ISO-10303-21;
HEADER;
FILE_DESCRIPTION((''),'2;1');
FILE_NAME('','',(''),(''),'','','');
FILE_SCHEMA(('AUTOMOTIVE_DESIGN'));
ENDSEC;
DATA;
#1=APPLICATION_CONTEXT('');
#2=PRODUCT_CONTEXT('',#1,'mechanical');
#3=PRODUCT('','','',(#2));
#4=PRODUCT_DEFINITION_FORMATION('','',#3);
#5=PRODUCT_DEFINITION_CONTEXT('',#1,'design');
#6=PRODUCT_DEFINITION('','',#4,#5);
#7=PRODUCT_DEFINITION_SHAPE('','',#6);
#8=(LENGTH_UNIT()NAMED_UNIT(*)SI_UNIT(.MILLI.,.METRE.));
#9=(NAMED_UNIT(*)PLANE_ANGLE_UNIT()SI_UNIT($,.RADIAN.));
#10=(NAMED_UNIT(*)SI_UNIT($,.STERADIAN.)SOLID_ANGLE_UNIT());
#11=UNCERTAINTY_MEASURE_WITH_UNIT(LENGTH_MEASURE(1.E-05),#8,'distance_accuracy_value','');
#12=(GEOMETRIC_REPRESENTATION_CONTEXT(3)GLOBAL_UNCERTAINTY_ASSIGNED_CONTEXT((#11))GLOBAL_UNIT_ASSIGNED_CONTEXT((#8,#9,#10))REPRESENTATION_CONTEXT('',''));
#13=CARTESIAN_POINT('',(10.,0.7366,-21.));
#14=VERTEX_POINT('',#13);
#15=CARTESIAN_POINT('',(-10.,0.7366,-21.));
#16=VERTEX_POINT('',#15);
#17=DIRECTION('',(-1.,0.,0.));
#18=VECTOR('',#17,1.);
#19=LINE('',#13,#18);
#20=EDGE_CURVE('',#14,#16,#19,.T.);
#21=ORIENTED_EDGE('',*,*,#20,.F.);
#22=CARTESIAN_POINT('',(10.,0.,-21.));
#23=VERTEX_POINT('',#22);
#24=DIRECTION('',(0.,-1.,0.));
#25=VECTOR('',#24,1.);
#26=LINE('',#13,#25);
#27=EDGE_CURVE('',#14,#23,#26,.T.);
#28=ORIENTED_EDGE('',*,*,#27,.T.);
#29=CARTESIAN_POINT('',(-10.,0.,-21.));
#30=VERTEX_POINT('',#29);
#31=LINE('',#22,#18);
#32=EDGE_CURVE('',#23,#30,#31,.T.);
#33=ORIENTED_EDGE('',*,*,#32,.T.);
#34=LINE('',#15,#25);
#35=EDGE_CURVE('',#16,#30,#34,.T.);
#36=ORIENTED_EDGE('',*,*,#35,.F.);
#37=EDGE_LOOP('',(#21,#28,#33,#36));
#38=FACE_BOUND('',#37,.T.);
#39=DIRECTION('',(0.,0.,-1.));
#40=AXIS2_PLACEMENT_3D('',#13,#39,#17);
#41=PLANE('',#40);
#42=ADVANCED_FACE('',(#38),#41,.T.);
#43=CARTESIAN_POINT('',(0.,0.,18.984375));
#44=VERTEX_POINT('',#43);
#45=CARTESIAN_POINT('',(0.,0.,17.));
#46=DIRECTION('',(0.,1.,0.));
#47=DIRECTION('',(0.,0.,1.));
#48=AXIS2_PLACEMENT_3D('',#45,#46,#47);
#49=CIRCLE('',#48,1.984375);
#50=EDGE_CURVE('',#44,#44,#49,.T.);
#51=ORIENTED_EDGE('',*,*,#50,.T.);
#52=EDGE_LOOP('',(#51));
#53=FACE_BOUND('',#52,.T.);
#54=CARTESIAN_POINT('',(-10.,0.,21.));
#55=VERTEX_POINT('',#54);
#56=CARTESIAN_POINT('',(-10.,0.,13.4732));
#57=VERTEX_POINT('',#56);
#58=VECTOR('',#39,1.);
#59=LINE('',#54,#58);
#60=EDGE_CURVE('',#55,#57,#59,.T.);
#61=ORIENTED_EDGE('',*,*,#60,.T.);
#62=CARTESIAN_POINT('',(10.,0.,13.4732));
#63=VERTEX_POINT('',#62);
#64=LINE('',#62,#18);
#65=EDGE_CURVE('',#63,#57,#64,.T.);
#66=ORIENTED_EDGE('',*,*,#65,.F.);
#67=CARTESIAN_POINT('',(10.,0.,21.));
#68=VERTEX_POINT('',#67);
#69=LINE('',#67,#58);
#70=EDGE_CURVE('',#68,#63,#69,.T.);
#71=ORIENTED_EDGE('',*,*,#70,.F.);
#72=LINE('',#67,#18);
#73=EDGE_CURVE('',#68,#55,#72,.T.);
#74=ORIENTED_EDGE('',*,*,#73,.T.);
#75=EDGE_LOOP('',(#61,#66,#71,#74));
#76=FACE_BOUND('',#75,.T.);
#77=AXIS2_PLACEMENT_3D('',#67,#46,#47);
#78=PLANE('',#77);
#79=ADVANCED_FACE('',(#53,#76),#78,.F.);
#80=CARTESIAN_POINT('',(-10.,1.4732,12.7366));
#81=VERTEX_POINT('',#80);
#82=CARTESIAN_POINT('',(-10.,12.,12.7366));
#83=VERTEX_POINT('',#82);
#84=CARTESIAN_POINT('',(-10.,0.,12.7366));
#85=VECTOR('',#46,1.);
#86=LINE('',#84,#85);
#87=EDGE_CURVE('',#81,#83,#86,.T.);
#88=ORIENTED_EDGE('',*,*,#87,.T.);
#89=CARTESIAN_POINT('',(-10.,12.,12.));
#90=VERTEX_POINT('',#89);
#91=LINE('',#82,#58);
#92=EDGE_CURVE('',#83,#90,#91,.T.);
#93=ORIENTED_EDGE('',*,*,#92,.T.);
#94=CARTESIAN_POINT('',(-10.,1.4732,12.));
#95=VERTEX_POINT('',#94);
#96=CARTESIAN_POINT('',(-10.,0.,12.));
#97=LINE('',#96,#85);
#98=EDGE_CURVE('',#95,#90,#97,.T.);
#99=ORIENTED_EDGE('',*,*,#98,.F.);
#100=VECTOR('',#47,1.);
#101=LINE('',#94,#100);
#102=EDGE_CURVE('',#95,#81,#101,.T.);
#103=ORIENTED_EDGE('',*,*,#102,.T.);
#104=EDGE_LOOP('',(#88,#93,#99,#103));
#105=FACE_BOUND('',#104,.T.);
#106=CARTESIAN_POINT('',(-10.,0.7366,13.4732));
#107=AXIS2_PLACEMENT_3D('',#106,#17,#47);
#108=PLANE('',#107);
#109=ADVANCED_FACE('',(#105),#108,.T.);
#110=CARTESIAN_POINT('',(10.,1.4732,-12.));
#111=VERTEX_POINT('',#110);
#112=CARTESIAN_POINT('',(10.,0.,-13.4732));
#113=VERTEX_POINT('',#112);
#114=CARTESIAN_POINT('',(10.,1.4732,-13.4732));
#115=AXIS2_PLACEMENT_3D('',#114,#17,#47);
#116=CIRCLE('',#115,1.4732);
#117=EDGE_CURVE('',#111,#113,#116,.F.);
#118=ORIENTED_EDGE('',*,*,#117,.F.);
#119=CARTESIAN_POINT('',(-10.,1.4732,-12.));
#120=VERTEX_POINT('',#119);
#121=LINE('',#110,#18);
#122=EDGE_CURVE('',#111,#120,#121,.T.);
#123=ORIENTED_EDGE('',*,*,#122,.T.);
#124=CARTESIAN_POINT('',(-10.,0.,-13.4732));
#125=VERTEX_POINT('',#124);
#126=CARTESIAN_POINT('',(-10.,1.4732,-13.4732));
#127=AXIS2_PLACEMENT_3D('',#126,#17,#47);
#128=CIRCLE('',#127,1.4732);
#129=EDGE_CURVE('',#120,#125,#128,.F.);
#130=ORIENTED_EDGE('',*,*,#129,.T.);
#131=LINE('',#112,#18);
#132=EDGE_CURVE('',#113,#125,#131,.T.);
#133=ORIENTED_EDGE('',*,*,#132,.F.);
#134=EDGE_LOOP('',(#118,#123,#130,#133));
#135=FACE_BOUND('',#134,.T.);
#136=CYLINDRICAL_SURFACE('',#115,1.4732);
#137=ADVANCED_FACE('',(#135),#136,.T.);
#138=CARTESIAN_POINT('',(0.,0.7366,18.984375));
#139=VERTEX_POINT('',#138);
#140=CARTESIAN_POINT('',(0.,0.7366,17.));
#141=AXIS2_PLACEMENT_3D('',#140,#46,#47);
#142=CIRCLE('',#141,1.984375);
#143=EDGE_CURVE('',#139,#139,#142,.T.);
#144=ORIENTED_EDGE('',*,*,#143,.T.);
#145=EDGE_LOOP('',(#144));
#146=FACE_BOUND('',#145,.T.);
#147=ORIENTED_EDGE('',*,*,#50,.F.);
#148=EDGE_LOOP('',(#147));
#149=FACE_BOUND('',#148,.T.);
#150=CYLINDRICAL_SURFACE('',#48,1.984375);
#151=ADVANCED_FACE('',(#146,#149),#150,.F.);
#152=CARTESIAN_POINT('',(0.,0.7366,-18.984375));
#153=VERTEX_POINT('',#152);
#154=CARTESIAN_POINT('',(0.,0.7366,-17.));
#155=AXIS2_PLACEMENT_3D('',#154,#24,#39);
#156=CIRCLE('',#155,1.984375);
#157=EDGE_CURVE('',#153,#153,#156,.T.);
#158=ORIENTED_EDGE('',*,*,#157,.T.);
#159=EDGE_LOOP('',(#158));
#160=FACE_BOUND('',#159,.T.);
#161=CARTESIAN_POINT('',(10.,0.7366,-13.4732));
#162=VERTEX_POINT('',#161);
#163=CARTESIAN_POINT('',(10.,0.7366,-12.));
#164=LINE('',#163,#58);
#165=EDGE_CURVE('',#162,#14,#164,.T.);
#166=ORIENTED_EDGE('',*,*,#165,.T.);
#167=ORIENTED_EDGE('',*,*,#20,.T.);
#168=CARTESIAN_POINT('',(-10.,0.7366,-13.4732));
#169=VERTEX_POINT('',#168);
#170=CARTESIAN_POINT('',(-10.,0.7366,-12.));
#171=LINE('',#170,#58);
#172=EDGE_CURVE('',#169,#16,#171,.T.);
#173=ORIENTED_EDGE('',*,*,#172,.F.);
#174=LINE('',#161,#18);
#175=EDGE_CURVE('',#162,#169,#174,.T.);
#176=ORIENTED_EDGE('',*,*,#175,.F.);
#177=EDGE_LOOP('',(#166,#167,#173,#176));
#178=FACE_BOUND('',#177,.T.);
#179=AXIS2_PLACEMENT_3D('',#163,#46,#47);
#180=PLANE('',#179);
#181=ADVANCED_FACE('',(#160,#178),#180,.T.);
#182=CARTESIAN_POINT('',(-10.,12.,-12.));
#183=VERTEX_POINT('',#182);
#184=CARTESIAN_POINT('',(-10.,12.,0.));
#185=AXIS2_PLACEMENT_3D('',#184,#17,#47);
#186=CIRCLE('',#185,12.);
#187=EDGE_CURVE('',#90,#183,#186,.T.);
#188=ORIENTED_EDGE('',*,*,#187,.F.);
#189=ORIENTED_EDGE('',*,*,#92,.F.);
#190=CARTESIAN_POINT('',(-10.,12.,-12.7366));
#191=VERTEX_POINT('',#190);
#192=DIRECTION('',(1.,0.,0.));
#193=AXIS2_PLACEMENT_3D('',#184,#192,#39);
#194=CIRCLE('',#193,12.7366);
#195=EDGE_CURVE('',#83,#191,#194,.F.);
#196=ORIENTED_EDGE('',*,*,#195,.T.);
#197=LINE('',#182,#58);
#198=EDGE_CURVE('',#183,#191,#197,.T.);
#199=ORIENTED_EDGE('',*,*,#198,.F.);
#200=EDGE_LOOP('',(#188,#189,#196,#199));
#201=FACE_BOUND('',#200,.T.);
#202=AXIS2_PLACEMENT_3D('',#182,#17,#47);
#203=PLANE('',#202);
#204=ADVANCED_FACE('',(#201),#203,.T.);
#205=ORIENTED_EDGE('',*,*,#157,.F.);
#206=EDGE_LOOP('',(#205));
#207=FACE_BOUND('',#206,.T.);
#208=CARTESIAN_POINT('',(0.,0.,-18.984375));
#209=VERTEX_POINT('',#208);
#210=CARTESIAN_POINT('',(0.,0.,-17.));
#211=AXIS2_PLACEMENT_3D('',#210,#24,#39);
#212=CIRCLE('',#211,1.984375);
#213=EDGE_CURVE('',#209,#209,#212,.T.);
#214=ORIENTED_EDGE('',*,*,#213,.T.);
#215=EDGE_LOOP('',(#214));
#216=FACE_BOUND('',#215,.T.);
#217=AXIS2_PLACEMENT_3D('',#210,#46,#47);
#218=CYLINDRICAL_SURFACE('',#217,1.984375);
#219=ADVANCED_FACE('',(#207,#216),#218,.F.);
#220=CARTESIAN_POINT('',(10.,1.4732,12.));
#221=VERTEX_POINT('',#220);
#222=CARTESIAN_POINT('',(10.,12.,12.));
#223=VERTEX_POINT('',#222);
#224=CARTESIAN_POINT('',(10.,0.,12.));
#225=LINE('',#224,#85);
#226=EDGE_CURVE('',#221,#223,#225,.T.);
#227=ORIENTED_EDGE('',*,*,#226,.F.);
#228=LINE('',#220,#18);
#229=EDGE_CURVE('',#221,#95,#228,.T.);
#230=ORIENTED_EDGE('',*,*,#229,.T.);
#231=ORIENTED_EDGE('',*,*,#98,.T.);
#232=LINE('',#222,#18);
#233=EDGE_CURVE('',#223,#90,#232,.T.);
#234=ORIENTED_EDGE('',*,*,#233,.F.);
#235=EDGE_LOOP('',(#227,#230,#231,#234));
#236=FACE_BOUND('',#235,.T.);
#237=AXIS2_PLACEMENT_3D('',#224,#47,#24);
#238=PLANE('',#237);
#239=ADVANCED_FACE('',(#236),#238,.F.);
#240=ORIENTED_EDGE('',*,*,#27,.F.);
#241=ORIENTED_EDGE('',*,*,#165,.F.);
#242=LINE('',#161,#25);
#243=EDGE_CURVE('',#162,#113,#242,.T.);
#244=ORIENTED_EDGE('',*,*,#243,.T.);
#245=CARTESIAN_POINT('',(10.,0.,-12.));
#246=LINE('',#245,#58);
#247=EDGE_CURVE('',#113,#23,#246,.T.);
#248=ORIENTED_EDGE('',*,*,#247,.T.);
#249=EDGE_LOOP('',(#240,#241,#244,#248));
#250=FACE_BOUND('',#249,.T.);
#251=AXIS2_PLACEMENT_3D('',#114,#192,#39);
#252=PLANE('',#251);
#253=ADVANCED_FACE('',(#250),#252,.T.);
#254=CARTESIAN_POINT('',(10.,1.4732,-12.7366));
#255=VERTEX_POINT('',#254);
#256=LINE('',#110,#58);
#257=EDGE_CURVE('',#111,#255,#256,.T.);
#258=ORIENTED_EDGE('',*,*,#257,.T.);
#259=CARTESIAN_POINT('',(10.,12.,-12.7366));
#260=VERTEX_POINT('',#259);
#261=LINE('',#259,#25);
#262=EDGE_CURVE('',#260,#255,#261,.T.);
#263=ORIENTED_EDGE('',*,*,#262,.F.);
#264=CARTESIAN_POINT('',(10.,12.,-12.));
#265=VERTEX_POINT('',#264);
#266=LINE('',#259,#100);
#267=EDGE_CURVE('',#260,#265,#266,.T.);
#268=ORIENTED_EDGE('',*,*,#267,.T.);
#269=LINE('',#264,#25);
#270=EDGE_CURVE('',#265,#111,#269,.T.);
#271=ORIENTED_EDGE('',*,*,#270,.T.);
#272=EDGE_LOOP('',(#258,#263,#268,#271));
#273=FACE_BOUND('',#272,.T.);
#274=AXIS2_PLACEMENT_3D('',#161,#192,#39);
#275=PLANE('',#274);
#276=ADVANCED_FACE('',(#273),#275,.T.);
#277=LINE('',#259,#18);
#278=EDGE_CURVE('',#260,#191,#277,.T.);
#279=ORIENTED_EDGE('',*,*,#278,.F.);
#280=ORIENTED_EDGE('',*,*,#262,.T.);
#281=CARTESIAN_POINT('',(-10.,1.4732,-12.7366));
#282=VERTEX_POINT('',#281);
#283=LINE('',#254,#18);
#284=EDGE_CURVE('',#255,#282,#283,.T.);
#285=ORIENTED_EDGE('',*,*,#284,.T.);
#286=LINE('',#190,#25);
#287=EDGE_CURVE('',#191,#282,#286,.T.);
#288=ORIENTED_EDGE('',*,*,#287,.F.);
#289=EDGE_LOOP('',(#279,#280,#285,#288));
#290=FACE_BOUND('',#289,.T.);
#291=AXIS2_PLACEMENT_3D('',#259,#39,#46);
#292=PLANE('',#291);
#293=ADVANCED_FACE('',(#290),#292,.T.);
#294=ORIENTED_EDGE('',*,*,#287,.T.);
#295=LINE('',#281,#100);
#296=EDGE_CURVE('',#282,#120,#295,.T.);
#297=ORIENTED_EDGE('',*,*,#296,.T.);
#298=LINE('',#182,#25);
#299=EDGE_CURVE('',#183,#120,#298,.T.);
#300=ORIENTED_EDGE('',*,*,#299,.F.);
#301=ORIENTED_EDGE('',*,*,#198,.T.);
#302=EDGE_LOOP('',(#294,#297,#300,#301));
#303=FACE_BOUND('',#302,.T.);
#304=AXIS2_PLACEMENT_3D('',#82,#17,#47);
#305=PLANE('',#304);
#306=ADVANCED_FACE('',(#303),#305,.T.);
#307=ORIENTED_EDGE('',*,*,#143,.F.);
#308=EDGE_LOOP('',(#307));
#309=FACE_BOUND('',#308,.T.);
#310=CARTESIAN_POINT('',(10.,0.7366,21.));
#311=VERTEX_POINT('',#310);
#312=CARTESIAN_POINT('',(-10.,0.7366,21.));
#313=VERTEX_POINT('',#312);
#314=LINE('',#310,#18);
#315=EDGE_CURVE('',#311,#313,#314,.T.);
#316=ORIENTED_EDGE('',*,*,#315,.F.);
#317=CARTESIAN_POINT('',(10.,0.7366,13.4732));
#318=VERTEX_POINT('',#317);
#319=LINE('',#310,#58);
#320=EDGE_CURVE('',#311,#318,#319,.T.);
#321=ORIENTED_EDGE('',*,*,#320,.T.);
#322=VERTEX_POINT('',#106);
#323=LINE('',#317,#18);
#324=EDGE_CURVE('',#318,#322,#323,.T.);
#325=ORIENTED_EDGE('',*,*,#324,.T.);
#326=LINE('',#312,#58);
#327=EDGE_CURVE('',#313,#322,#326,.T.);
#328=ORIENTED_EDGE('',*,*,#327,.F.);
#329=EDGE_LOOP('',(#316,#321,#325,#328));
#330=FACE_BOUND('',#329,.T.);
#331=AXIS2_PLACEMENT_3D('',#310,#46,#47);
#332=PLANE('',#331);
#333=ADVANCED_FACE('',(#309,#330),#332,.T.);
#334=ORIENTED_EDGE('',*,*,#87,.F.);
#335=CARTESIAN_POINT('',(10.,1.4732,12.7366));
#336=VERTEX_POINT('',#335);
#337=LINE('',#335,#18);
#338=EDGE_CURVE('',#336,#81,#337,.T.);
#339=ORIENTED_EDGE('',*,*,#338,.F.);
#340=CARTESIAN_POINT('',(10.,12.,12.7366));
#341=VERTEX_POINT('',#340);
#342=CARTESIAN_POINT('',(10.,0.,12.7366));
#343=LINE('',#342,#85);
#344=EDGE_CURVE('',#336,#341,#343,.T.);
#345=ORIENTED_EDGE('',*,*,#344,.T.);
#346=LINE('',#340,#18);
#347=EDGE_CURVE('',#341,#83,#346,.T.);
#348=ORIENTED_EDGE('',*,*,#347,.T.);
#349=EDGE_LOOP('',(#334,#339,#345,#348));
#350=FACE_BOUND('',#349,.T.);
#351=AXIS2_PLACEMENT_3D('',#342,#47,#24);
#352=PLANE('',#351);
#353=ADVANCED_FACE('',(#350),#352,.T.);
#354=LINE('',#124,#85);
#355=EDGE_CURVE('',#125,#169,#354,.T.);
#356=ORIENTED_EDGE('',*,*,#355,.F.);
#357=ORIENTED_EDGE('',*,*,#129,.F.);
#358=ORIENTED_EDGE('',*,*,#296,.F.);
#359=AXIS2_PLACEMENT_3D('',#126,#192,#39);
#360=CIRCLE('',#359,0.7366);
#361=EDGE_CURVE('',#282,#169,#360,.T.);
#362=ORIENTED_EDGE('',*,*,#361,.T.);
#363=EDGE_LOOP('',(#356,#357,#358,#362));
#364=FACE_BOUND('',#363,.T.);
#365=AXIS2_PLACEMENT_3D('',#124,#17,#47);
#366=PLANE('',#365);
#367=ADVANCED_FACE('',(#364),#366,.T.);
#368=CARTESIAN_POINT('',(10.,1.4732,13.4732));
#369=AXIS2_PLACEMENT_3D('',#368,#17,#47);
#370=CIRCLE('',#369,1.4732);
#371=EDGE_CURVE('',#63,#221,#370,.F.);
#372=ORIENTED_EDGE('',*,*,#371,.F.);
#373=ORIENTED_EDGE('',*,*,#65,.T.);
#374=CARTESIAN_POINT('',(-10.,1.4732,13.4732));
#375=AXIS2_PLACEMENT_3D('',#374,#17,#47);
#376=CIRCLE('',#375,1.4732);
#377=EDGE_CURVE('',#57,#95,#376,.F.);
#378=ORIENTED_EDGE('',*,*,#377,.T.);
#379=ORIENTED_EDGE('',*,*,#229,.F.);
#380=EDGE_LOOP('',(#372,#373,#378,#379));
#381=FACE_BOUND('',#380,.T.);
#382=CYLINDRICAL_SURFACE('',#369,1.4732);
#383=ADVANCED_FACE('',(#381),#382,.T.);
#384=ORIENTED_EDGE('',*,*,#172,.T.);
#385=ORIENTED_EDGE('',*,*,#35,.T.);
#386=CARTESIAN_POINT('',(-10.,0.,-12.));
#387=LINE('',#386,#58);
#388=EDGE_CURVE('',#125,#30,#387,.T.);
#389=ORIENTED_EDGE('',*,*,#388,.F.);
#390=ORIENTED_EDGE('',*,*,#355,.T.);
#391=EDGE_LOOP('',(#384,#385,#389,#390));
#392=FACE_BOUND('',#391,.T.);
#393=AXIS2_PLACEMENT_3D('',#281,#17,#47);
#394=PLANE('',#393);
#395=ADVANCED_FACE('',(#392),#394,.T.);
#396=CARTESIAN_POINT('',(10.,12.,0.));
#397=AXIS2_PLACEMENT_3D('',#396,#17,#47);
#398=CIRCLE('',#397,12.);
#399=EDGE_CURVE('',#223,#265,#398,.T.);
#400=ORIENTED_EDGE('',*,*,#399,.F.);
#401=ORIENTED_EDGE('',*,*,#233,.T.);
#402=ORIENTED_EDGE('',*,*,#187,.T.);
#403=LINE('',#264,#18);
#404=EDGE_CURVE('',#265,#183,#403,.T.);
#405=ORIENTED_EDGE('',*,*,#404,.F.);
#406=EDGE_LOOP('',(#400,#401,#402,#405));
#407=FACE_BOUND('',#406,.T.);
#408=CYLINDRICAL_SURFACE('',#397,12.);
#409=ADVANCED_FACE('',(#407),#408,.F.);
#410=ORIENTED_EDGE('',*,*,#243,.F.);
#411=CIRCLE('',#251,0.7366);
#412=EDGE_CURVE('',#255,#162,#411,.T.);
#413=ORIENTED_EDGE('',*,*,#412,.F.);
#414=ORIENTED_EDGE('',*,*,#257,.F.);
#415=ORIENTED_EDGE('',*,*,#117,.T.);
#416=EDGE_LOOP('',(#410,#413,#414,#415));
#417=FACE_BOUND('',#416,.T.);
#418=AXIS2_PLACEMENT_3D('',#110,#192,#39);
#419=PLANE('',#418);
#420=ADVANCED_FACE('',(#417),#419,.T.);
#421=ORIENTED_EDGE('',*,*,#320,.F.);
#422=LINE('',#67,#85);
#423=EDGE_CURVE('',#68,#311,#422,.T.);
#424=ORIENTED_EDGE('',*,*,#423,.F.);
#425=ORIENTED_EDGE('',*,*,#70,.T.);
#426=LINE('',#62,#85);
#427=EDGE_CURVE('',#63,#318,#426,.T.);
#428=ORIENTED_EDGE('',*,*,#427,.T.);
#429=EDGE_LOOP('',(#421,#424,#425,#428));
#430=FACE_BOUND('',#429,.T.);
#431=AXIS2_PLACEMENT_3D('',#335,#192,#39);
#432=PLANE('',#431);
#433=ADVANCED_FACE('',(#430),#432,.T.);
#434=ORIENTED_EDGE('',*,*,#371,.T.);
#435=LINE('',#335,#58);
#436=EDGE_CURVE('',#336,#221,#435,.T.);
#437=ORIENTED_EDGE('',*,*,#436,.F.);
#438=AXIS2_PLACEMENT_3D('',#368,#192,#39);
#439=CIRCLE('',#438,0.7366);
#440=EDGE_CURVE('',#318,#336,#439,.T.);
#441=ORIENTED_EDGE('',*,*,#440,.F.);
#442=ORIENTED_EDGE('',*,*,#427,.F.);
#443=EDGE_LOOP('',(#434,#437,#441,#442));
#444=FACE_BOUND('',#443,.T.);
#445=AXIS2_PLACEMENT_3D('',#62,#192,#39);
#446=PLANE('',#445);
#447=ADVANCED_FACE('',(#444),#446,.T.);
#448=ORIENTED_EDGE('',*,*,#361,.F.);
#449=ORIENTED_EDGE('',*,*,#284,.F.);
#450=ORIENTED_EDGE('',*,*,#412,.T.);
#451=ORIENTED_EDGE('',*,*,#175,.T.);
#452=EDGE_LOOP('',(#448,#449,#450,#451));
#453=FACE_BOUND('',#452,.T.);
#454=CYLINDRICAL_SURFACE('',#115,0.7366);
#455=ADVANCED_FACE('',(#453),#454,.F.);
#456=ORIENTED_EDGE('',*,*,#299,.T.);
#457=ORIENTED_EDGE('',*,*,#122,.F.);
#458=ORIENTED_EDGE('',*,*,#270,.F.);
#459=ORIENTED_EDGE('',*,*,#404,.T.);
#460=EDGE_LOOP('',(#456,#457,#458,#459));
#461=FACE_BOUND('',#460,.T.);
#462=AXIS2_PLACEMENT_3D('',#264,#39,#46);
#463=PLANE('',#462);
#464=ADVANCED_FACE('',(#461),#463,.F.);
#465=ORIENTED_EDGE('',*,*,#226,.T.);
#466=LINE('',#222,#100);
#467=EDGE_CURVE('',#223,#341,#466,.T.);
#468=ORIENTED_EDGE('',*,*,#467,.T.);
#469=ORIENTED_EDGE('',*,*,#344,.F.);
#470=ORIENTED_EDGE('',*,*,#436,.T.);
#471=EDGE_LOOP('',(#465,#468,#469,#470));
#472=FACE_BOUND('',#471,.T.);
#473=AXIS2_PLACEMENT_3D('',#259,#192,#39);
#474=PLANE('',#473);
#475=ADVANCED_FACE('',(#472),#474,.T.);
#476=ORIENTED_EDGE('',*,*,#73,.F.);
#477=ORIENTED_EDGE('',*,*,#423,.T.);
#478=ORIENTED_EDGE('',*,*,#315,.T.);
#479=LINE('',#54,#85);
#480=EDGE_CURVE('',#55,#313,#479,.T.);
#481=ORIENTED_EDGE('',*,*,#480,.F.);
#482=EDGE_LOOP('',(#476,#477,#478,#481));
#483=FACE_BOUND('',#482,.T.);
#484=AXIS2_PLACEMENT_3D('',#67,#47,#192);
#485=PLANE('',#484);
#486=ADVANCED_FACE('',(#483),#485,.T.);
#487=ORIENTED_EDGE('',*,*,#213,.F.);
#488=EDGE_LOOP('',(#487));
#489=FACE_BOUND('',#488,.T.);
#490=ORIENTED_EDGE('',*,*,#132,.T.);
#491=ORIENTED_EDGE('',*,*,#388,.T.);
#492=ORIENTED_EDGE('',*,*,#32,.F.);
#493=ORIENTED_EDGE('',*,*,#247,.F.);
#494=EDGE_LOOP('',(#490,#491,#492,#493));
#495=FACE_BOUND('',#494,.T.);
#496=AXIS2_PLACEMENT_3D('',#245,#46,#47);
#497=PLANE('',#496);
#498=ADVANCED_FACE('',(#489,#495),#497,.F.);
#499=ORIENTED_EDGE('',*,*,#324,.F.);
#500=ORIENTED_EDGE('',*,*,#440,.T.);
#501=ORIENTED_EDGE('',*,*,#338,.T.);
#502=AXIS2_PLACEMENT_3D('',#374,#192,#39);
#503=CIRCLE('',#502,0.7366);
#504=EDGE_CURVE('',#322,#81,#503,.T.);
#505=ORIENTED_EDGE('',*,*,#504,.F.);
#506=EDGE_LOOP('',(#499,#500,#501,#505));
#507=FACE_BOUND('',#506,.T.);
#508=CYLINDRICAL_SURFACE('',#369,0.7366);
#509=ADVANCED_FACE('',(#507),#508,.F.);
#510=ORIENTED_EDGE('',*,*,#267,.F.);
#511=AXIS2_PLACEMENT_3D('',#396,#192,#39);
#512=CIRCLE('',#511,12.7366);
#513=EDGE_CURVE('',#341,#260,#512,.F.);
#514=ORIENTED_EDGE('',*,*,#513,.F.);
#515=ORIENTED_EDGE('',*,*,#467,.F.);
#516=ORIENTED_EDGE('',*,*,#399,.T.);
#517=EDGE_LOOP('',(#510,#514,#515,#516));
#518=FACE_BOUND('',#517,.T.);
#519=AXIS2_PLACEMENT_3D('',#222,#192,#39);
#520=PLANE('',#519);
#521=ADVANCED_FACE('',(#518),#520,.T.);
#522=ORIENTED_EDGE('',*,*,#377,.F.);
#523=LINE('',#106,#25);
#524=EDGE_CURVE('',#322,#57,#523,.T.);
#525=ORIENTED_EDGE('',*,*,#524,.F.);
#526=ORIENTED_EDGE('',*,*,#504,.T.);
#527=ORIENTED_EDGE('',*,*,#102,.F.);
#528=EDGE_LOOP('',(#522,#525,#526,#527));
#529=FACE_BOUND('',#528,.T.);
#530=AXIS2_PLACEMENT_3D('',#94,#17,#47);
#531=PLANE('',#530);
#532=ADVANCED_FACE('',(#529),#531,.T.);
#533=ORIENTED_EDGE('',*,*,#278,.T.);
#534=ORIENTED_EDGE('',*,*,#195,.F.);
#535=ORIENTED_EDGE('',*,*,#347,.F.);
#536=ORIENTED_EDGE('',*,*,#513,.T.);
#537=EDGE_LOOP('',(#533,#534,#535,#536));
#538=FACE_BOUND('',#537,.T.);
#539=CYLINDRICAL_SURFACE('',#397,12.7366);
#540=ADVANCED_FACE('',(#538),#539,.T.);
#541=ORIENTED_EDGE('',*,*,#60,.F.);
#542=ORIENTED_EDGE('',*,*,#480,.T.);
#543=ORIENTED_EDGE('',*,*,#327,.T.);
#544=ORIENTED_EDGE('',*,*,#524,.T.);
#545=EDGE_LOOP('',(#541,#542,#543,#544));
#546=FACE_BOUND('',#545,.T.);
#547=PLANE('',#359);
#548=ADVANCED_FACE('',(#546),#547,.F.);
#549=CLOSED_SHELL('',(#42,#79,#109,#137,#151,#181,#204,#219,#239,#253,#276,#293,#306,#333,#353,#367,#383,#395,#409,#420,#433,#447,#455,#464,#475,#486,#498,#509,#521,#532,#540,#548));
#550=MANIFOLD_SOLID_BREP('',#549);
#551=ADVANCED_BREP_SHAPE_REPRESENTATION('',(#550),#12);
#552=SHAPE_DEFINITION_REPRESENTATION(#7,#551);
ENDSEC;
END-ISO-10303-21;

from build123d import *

# Parameters (mm, degrees)
BASE_FLANGE1_DEPTH = 10
SKETCH6_R          = 1.984375
CUT_EXTRUDE1_DEPTH = 34.421549934


# Sheet-metal steps are written as plain solids
with BuildPart() as part:
    # Sketch1 → Base-Flange1 (new, symmetric)
    with BuildSketch(Plane(origin=(0, 0, 0), x_dir=(0, 0, -1), z_dir=(1, 0, 0))):
        with BuildLine():
            Line((-21, 0), (-13.4732, 0))
            ThreePointArc((-13.4732, 0), (-12.43149029, 0.43149029), (-12, 1.4732))
            Line((-12, 1.4732), (-12, 12))
            ThreePointArc((-12, 12), (0, 24), (12, 12))
            Line((12, 12), (12, 1.4732))
            ThreePointArc((12, 1.4732), (12.43149029, 0.43149029), (13.4732, 0))
            Line((13.4732, 0), (21, 0))
            Line((21, 0), (21, 0.7366))
            Line((21, 0.7366), (13.4732, 0.7366))
            ThreePointArc((13.4732, 0.7366), (12.952345145, 0.952345145), (12.7366, 1.4732))
            Line((12.7366, 1.4732), (12.7366, 12))
            ThreePointArc((12.7366, 12), (0, 24.7366), (-12.7366, 12))
            Line((-12.7366, 12), (-12.7366, 1.4732))
            ThreePointArc((-12.7366, 1.4732), (-12.952345145, 0.952345145), (-13.4732, 0.7366))
            Line((-13.4732, 0.7366), (-21, 0.7366))
            Line((-21, 0.7366), (-21, 0))
        make_face()
    extrude(amount=BASE_FLANGE1_DEPTH, both=True)

    # Sketch6 → Cut-Extrude1 (cut, through all)
    with BuildSketch(Plane(origin=(0, 0.7366, 0), x_dir=(1, 0, 0), z_dir=(0, 1, 0))):
        with Locations(Location((0, -17, 0), (0, 0, 270))):
            Circle(SKETCH6_R)
    cut_extrude1 = extrude(amount=-CUT_EXTRUDE1_DEPTH, mode=Mode.SUBTRACT)

    # Mirror1: Cut-Extrude1 across plane
    add(cut_extrude1.mirror(Plane.XY), mode=Mode.SUBTRACT)


solid = part.part
